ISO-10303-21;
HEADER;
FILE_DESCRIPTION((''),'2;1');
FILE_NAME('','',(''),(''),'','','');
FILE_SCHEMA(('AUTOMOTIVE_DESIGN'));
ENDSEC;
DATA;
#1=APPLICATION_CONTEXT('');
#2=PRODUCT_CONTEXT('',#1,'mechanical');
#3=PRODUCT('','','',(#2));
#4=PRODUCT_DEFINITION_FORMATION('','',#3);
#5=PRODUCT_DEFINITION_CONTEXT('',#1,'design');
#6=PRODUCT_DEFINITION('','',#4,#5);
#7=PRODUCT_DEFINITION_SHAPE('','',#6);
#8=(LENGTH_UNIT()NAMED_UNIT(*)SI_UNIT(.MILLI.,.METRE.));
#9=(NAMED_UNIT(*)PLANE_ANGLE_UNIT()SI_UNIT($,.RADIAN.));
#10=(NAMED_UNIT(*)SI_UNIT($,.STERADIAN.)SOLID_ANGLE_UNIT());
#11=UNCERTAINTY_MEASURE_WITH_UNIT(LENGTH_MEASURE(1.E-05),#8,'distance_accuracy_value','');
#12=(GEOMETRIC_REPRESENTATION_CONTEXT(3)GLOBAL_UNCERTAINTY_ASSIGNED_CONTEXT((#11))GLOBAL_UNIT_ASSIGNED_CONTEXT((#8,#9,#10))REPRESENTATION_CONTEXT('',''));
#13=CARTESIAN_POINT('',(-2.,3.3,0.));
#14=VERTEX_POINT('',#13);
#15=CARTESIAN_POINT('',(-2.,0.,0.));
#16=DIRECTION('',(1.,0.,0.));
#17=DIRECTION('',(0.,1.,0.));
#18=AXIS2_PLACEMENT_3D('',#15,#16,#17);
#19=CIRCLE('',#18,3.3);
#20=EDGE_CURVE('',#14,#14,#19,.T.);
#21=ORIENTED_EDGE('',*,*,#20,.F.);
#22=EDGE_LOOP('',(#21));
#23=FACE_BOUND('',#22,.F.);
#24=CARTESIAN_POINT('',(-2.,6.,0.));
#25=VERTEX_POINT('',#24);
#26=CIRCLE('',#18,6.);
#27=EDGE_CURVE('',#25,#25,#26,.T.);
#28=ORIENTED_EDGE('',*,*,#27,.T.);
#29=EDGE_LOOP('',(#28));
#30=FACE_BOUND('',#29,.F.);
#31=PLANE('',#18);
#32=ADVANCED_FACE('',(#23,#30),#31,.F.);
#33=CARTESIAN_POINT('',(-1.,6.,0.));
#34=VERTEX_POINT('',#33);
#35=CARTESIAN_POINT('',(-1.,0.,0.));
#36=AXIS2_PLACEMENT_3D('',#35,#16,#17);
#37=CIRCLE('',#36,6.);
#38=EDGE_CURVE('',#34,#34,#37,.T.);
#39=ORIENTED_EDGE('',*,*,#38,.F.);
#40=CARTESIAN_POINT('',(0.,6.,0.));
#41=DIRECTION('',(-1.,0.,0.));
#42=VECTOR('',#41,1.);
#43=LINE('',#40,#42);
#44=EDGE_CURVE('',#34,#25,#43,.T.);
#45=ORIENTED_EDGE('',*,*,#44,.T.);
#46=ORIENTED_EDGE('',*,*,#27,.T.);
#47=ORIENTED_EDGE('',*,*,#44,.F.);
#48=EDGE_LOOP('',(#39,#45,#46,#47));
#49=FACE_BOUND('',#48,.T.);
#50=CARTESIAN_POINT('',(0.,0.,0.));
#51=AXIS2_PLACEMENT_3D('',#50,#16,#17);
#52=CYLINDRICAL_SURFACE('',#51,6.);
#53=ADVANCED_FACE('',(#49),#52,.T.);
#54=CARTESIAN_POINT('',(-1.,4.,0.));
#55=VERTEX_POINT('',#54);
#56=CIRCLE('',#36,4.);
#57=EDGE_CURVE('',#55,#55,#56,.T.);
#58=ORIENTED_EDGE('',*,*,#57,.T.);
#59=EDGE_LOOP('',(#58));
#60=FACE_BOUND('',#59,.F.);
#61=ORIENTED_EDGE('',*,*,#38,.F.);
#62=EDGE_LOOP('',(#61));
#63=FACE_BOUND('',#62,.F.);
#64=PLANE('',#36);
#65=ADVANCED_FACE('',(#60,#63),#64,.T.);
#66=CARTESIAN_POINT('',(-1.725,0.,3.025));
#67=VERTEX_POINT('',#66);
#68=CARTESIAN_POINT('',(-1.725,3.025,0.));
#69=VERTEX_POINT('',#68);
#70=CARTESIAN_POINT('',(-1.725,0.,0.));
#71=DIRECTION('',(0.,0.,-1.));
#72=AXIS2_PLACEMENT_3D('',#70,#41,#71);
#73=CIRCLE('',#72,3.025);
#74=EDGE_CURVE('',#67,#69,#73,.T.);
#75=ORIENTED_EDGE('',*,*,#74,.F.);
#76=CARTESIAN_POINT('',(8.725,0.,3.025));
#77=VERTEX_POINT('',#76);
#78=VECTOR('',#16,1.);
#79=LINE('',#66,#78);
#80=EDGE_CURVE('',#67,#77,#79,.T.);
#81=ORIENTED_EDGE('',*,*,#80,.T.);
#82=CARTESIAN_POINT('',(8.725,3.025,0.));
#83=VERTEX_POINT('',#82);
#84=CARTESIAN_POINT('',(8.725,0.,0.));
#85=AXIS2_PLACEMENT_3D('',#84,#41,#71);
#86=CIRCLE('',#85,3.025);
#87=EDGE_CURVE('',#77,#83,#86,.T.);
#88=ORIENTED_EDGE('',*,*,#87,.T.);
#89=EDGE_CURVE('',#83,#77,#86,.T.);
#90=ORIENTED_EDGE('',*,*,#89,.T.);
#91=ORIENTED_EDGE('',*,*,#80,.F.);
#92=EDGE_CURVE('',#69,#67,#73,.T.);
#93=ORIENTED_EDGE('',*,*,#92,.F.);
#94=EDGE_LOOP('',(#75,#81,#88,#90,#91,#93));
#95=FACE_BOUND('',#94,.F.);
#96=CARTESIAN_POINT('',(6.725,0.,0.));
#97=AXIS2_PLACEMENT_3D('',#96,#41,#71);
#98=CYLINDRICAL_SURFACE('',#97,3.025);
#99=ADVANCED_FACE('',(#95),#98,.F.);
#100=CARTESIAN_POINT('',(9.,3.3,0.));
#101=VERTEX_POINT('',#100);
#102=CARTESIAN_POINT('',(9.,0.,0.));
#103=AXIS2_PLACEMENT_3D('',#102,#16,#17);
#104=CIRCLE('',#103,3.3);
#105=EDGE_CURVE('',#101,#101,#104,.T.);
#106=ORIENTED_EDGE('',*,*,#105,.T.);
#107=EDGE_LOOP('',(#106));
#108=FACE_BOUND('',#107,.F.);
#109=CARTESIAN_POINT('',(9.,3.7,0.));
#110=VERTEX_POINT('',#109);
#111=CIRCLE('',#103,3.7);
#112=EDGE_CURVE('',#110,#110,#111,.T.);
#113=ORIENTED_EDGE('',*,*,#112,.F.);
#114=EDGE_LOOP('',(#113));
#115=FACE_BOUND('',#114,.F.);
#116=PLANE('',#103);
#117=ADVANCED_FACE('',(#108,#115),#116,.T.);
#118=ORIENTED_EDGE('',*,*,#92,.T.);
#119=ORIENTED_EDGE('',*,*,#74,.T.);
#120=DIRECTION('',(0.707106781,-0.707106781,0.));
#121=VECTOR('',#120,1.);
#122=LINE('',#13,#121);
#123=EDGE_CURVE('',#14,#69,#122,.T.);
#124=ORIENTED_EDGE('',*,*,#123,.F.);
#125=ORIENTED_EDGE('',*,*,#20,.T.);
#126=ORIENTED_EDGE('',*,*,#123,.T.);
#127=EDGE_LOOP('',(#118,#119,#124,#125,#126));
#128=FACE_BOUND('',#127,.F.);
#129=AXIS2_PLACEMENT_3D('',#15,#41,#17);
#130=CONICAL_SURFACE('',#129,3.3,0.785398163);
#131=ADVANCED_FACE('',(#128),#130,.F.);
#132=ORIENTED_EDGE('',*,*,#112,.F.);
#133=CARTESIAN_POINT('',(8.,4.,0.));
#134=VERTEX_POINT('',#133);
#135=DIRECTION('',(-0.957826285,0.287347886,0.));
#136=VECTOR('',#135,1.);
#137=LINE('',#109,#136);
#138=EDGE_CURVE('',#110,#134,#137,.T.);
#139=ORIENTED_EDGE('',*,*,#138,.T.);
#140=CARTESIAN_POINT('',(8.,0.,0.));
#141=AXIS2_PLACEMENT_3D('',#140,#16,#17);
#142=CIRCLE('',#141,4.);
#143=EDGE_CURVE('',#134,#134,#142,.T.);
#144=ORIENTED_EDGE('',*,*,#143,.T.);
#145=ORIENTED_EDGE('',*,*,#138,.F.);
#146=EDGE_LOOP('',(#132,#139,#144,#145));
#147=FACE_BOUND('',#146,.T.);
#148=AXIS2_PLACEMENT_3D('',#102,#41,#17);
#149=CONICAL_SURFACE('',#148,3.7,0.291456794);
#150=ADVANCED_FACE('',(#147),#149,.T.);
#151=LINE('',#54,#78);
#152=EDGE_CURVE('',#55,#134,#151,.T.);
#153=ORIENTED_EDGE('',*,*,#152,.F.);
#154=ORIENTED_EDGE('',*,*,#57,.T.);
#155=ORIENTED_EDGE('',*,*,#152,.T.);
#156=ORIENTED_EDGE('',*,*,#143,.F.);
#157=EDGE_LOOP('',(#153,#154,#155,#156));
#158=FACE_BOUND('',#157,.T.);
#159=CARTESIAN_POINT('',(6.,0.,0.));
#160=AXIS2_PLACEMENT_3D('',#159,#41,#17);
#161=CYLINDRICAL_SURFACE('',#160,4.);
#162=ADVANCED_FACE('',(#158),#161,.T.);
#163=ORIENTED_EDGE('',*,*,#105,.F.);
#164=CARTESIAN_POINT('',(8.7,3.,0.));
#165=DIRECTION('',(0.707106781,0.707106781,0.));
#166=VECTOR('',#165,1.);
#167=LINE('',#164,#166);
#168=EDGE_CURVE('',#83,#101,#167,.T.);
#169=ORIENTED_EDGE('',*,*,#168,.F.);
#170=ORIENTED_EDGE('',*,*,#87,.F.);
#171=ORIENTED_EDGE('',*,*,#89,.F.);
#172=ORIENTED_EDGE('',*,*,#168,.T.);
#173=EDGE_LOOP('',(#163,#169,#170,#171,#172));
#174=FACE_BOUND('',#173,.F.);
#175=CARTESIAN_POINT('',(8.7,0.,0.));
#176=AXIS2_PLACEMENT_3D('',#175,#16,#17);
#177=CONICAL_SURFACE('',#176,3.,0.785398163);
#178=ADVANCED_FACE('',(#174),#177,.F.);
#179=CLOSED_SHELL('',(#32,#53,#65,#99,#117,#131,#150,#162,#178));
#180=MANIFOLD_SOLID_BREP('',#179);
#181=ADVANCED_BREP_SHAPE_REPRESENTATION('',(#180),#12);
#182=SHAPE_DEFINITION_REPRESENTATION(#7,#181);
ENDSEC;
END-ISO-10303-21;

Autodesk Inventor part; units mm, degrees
ref_plane "YZ Plane" through (0, 0, 0) normal (1, 0, 0) x (0, 1, 0)
ref_plane "XZ Plane" through (0, 0, 0) normal (0, 1, 0) x (-1, 0, 0)
ref_plane "XY Plane" through (0, 0, 0) normal (0, 0, 1) x (1, 0, 0)
sketch "Sketch_1" plane through (0, 0, 0) normal (0, 0, 1) x (1, 0, 0)
  line L0 (7, 0) -> (0, 0)
  line L1 (0, 3.3) -> (0.3, 3)
  line L2 (0.3, 3) -> (6.7, 3)
  line L3 (6.7, 3) -> (7, 3.3)
  line L4 (7, 3.3) -> (7, 3.7)
  line L5 (7, 3.7) -> (6, 4)
  line L6 (6, 4) -> (1, 4)
  line L7 (1, 4) -> (1, 6)
  line L8 (1, 6) -> (0, 6)
  line L9 (0, 6) -> (0, 3.3)
revolve "Revolution1" add sketch "Sketch_1" angle 360 about axis through (7, 0, 0) along (1, 0, 0)
sketch "스케치2" plane through (0, 0, 0) normal (-1, 0, 0) x (0, 0, 1)
  circle A0 centre (0, 0) radius 3.3 projected
  circle A1 centre (0, 0) radius 6 projected
  circle A2 centre (0, 0) radius 3.025
  dimension "d1" = 6.05
extrude "돌출1" cut sketch "스케치2" against normal up to surface (7 mm away) contours A2
move faces "이동1" translate (-2, 0, 0) faces at (0, 5.0099, -0.7419) (0.0917, 3.1979, -0.2582) (1, 5.2365, -0.7977) (0.6667, 5.9223, -0.9625)
move faces "이동2" translate (2, 0, 0) faces at (6.1667, -1.7292, 3.5514) (6.9083, 3.1979, -0.2582) (7, 3.5308, -0.2952)
properties part number "80F-0610"
